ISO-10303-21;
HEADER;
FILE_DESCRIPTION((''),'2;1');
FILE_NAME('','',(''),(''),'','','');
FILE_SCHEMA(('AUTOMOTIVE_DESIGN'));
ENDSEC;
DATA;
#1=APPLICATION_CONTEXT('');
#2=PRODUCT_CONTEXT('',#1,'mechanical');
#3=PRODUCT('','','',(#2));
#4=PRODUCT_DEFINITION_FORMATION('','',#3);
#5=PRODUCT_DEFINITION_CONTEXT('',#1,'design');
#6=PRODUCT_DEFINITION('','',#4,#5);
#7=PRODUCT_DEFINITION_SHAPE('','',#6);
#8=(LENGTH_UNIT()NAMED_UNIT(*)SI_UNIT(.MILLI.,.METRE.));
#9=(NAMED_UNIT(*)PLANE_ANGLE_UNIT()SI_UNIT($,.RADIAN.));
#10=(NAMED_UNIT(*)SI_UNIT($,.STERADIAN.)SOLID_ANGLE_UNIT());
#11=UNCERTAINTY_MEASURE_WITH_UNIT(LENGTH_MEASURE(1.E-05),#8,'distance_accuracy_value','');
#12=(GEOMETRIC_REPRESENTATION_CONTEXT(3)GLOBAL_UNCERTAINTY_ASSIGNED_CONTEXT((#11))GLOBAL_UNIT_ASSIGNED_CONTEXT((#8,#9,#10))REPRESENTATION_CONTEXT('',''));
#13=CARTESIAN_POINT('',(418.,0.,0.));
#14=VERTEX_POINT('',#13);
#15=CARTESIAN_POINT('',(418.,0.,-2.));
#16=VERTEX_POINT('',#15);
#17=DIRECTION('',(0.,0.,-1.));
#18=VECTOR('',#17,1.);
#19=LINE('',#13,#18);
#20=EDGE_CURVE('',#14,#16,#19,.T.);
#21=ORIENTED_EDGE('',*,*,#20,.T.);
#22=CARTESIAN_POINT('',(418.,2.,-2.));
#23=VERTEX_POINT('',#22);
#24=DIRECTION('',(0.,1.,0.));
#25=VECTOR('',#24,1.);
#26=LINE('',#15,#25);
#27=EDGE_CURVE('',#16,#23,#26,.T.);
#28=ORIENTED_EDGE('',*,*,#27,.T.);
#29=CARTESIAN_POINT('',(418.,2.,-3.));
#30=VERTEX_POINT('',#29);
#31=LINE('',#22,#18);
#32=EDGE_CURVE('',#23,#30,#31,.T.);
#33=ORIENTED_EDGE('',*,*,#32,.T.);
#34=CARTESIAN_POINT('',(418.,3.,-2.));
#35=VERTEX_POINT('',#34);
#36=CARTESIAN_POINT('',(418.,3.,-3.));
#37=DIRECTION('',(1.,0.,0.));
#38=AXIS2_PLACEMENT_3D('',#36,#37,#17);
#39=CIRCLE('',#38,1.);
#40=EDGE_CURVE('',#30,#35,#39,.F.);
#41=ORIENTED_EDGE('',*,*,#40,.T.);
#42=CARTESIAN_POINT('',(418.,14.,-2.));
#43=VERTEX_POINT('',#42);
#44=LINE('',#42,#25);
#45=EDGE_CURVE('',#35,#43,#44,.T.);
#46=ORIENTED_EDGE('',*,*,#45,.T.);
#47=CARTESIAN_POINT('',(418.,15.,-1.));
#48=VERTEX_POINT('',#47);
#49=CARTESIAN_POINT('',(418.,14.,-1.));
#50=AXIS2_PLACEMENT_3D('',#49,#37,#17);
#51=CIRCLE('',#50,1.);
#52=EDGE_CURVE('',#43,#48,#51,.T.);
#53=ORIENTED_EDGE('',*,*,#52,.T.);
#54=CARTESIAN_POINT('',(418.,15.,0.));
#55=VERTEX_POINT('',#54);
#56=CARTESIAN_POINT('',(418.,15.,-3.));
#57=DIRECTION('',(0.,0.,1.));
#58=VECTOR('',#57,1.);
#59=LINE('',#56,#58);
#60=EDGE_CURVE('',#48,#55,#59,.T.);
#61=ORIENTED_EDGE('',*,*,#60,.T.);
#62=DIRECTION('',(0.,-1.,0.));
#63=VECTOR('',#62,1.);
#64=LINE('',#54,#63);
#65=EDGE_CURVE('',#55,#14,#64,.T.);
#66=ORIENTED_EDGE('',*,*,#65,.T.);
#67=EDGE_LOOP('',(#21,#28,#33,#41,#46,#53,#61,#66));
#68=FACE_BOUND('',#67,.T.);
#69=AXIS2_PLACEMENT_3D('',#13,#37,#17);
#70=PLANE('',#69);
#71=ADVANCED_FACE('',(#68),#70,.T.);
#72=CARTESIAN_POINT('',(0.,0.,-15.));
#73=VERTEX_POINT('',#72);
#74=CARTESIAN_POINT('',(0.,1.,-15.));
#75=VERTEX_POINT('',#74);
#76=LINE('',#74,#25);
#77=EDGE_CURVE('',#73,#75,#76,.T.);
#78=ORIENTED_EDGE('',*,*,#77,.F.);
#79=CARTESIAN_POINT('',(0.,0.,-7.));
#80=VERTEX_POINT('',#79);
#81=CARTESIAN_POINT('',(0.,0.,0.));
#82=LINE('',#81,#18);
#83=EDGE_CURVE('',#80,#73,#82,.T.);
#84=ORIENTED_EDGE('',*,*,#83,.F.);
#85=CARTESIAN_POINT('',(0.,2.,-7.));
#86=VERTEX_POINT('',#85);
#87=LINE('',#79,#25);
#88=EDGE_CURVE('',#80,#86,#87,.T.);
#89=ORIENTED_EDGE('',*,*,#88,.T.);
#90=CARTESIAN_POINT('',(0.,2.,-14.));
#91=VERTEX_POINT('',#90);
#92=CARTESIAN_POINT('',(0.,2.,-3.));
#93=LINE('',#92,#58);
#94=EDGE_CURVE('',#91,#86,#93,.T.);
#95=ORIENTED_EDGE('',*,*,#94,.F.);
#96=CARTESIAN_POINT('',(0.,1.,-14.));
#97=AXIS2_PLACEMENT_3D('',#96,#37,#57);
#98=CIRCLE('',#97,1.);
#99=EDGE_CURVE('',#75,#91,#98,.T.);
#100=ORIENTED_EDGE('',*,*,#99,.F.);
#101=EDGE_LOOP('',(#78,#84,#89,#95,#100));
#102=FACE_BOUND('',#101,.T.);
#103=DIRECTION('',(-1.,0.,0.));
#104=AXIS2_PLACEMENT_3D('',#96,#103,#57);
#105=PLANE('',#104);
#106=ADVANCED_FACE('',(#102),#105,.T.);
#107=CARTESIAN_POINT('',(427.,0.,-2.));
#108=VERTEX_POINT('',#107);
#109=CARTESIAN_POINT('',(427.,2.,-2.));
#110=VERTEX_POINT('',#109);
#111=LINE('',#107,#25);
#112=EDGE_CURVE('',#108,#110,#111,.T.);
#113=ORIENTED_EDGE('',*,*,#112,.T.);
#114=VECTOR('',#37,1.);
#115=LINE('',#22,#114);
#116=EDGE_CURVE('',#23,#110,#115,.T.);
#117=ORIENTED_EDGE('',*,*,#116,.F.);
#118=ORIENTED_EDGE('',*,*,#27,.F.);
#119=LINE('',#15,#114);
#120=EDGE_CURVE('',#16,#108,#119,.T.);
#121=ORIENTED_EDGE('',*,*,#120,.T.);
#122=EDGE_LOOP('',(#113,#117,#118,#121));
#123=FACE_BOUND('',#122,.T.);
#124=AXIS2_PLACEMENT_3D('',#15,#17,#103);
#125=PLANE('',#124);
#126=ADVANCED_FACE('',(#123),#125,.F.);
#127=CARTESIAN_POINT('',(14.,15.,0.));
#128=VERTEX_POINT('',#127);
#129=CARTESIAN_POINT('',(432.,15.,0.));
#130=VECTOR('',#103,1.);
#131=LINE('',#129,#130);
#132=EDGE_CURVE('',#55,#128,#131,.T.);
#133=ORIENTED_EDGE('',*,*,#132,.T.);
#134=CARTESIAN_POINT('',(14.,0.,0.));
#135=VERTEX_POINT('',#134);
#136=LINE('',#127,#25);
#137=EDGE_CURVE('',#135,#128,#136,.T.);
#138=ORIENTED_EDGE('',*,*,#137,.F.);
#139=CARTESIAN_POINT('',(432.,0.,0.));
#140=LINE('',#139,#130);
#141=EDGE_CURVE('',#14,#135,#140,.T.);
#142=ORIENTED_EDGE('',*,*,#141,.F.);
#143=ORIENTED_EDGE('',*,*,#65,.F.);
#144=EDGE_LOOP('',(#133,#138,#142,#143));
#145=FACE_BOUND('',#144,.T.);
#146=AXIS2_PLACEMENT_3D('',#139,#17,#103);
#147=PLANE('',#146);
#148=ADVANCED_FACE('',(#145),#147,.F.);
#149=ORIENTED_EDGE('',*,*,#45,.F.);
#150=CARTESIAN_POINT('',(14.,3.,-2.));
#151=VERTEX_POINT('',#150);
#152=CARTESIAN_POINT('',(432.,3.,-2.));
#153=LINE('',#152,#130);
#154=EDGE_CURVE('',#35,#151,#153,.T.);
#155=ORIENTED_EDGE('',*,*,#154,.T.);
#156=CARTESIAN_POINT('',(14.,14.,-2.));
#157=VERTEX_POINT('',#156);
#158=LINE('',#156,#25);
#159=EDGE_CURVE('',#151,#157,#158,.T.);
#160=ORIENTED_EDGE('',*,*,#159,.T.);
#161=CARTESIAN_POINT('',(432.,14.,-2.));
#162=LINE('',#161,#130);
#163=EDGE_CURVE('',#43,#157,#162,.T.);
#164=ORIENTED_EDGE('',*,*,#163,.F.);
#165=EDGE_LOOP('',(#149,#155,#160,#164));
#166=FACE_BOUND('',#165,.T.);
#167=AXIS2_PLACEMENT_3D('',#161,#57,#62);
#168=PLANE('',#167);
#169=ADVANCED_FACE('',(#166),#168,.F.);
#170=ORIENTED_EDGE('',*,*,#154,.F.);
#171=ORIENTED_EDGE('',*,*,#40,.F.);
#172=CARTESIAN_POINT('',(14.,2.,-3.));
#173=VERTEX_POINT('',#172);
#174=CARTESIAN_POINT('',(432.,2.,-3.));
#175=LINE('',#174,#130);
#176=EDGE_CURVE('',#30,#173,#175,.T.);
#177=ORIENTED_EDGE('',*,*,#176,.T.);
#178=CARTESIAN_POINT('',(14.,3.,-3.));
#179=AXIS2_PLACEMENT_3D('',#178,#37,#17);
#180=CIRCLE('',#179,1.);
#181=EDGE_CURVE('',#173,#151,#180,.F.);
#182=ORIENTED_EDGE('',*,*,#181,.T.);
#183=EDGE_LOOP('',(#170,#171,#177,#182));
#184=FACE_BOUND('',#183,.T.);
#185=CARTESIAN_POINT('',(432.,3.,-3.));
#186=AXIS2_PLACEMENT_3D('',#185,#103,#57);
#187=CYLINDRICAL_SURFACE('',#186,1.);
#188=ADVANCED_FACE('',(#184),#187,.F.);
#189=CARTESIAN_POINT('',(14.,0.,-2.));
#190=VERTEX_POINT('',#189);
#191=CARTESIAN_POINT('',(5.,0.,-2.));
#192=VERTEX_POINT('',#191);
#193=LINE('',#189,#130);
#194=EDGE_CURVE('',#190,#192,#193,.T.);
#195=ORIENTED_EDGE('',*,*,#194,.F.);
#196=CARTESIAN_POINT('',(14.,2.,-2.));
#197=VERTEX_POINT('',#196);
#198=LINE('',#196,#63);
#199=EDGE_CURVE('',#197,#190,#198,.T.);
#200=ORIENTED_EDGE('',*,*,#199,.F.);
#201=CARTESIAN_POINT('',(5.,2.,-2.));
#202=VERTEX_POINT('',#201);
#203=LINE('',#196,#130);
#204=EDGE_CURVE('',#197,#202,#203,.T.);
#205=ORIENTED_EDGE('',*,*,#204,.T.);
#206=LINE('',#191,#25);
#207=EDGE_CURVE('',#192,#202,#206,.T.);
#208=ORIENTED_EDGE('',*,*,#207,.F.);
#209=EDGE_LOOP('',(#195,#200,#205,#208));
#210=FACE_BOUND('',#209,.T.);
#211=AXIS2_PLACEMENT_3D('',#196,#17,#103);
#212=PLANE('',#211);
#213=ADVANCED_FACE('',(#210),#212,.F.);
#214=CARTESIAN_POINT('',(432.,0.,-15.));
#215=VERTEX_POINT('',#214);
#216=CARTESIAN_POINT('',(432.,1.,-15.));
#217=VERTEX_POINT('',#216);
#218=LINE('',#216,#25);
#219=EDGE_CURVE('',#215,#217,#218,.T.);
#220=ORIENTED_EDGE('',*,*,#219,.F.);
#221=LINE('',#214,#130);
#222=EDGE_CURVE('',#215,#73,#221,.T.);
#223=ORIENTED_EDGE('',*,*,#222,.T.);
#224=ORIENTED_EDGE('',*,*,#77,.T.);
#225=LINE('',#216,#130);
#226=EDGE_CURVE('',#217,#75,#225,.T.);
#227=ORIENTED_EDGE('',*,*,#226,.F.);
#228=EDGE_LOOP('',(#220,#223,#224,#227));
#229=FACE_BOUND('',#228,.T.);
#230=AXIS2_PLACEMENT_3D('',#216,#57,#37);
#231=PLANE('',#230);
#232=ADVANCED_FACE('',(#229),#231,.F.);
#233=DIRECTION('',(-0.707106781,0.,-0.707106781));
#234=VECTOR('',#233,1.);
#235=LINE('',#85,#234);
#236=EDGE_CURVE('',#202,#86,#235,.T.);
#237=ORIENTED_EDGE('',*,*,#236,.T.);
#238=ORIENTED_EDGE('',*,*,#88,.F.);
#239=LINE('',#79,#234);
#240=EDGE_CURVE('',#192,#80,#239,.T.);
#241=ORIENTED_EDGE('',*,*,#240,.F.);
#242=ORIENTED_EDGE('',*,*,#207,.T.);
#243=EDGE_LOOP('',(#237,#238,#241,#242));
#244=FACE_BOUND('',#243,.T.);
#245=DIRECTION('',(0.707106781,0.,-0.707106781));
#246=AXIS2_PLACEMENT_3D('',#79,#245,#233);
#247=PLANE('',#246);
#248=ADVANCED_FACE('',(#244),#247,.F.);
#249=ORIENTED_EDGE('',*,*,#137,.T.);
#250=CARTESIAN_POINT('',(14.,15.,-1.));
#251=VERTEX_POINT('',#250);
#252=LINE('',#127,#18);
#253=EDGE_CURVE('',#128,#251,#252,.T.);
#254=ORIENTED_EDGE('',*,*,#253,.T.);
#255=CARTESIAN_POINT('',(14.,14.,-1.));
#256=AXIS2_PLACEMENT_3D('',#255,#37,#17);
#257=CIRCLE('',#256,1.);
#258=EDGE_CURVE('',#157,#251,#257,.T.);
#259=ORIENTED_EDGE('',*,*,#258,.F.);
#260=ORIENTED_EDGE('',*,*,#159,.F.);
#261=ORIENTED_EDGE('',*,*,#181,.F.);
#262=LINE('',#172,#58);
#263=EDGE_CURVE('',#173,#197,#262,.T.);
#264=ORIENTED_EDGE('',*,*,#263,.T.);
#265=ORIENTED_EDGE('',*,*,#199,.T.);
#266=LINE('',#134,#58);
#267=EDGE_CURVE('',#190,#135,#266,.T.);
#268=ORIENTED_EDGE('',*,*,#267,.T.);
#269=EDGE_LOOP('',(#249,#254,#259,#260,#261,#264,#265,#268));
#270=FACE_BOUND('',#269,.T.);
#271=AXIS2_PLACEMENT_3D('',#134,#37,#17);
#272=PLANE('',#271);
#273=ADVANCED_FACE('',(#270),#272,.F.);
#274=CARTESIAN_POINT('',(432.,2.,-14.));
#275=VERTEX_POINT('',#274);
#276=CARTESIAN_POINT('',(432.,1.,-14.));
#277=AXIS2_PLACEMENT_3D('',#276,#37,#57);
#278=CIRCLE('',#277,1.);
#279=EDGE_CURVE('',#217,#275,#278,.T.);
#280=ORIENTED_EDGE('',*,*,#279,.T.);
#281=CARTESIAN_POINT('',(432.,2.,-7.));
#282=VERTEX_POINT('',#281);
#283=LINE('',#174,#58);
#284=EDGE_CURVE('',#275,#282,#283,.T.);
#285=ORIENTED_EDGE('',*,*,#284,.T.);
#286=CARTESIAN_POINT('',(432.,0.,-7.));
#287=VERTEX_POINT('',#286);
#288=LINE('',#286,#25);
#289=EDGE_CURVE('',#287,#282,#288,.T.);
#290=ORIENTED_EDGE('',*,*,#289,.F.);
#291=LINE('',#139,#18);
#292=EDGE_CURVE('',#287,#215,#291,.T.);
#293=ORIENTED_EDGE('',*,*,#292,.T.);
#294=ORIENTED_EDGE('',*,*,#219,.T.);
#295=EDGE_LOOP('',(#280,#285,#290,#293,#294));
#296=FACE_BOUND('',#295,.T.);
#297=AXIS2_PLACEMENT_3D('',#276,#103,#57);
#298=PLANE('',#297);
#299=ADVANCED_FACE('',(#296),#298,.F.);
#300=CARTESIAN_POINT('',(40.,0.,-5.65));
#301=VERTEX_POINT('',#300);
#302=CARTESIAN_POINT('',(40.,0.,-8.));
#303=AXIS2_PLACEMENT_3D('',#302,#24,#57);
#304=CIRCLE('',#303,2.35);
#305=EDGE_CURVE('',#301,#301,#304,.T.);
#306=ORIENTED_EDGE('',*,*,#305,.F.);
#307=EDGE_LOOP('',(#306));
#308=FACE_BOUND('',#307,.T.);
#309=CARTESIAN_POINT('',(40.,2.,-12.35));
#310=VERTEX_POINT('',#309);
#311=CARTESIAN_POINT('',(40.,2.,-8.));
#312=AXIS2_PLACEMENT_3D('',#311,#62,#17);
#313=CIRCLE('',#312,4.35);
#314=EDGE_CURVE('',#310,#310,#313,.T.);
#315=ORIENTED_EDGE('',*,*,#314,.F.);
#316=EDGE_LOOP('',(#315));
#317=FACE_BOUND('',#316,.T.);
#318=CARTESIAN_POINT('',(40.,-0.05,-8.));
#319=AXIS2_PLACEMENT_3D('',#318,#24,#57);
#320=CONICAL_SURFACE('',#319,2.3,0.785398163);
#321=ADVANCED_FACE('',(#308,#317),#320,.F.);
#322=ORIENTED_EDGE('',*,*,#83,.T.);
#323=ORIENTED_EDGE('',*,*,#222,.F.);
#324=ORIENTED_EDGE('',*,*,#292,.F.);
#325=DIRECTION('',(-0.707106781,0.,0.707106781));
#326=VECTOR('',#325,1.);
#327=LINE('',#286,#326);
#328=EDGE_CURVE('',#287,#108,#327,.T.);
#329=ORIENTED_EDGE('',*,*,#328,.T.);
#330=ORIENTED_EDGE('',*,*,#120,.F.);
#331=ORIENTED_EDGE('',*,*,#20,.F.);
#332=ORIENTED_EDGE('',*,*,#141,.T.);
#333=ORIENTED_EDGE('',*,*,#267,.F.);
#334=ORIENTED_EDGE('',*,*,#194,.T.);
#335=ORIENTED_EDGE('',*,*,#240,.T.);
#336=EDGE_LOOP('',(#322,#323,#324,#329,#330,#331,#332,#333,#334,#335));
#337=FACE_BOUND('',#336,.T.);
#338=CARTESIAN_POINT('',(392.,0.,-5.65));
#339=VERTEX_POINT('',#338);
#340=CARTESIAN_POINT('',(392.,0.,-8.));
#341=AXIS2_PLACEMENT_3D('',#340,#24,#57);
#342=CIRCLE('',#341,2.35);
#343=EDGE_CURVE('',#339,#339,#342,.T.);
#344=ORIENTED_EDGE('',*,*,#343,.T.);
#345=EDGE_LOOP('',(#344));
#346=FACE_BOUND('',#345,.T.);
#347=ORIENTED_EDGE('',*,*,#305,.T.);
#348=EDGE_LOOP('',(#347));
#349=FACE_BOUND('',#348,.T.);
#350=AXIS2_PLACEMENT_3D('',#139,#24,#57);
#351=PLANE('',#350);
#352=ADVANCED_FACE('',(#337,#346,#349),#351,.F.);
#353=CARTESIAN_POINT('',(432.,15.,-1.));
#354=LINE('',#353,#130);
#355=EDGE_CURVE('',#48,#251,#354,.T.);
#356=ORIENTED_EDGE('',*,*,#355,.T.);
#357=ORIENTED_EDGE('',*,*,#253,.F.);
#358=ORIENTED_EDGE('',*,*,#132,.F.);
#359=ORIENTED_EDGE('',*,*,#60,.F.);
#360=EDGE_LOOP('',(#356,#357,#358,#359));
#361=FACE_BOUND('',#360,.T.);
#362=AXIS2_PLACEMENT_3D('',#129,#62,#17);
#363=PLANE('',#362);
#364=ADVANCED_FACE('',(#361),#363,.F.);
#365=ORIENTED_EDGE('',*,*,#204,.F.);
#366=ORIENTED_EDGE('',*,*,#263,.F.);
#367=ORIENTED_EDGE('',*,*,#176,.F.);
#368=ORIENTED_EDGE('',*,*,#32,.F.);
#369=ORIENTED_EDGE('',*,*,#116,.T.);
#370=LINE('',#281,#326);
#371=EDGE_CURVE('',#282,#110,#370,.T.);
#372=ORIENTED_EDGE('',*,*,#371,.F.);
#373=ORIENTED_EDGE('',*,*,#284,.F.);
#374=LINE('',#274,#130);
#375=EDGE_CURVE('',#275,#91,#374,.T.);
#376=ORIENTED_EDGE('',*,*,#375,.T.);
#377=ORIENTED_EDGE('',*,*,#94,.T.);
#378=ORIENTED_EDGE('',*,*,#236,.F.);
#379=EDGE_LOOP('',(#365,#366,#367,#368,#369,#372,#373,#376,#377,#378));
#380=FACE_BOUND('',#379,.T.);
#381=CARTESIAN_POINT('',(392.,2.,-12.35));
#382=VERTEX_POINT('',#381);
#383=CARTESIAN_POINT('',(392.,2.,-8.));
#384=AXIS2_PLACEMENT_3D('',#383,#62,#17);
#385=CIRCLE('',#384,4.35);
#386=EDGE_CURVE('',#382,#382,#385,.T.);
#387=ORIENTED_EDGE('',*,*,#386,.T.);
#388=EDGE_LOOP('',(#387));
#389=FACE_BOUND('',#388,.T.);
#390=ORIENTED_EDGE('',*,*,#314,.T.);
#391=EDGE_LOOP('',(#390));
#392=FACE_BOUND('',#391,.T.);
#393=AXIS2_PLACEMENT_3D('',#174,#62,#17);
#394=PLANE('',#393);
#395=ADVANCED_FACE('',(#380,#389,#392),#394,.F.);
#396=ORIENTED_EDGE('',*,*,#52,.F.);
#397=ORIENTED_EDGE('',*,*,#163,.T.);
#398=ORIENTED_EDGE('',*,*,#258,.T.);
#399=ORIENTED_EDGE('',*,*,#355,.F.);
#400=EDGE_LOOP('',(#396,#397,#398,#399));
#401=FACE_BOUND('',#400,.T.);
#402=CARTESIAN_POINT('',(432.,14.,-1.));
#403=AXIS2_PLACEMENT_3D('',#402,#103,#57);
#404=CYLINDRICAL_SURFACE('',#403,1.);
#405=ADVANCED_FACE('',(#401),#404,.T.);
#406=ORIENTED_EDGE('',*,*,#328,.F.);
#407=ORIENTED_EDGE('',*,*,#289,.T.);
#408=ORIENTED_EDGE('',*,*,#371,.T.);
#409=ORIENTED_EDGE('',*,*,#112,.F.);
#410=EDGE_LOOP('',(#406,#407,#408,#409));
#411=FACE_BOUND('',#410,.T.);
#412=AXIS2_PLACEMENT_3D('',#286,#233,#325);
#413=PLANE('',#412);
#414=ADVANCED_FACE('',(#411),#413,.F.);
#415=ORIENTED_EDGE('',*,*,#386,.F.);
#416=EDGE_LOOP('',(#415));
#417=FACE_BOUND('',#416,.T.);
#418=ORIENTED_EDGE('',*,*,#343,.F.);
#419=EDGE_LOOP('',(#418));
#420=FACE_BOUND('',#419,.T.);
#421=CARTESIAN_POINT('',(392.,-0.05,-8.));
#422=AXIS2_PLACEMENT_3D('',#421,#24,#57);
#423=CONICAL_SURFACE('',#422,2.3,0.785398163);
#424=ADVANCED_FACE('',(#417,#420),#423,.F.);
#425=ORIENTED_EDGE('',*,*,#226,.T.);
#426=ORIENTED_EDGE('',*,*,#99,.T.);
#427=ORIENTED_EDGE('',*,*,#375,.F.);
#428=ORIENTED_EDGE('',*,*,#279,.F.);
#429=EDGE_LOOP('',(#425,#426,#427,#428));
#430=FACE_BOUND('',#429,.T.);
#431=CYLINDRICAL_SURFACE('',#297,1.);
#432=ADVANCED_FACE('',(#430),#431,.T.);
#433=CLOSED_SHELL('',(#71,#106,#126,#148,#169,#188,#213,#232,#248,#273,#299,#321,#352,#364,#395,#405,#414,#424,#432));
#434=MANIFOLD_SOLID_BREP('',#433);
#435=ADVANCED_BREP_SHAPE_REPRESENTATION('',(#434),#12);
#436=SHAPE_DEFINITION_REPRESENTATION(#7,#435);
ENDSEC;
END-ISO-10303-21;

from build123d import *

# Parameters (mm, degrees)
EXTRUDE_1_DEPTH     = 432
CUT_EXTRUDE_5_DEPTH = 14
CUT_EXTRUDE_6_DEPTH = 14
CUT_EXTRUDE_7_DEPTH = 433.455778086
SKETCH_10_R         = 2.3
CUT_EXTRUDE_8_DEPTH = 433.455778086
CHAMFER_1_SIZE      = 2.05


with BuildPart() as part:
    # Эскиз1 → Бобышка-Вытянуть1 (new body)
    with BuildSketch(Plane(origin=(0, 0, 0), x_dir=(0, 0, -1), z_dir=(1, 0, 0))):
        with BuildLine():
            Line((0, 0), (0, 15))
            Line((0, 15), (1, 15))
            ThreePointArc((1, 15), (1.707106781, 14.707106781), (2, 14))
            Line((2, 14), (2, 3))
            ThreePointArc((2, 3), (2.292893219, 2.292893219), (3, 2))
            Line((3, 2), (14, 2))
            ThreePointArc((14, 2), (14.707106781, 1.707106781), (15, 1))
            Line((15, 1), (15, 0))
            Line((15, 0), (0, 0))
        make_face()
    extrude(amount=EXTRUDE_1_DEPTH)

    # Эскиз6 → Вырез-Вытянуть5 (cut)
    with BuildSketch(Plane(origin=(432, 0, 0), x_dir=(0, 0, -1), z_dir=(1, 0, 0))):
        Polygon((0, 15), (2, 15), (3, 15), (3, 2), (2, 2), (2, 0), (0, 0), align=None)
    extrude(amount=-CUT_EXTRUDE_5_DEPTH, mode=Mode.SUBTRACT)

    # Эскиз7 → Вырез-Вытянуть6 (cut)
    with BuildSketch(Plane.ZY):
        Polygon((0, 15), (-2, 15), (-3, 15), (-3, 2), (-2, 2), (-2, 0), (0, 0), align=None)
    extrude(amount=-CUT_EXTRUDE_6_DEPTH, mode=Mode.SUBTRACT)

    # Эскиз9 → Вырез-Вытянуть7 (cut, through all)
    with BuildSketch(Plane(origin=(0, 2, 0), x_dir=(1, 0, 0), z_dir=(0, 1, 0))):
        Polygon((0, 2), (0, 7), (5, 2), align=None)
        Polygon((432, 2), (432, 7), (427, 2), align=None)
    extrude(amount=-CUT_EXTRUDE_7_DEPTH, mode=Mode.SUBTRACT)

    # Эскиз10 → Вырез-Вытянуть8 (cut, through all)
    with BuildSketch(Plane(origin=(0, 2, 0), x_dir=(1, 0, 0), z_dir=(0, 1, 0))):
        with Locations(Location((40, 8, 0), (0, 0, 270))):
            Circle(SKETCH_10_R)
        with Locations(Location((392, 8, 0), (0, 0, 270))):
            Circle(SKETCH_10_R)
    extrude(amount=-CUT_EXTRUDE_8_DEPTH, mode=Mode.SUBTRACT)

    # Фаска1
    # the kernel refuses this chamfer: 2.05 mm, written as the material it takes off along each edge
    with BuildSketch(Plane(origin=(40, 2, -8), x_dir=(0, 0, 1), z_dir=(-1, 0, 0))) as chamfer_1_piece_1:
        Polygon((2.3 + CHAMFER_1_SIZE, 0), (2.3, -CHAMFER_1_SIZE), (2.3, 0), align=None)
    revolve(axis=Axis((40, 2, -8), (0, 1, 0)), mode=Mode.SUBTRACT)
    with BuildSketch(Plane(origin=(392, 2, -8), x_dir=(0, 0, 1), z_dir=(-1, 0, 0))) as chamfer_1_piece_2:
        Polygon((2.3 + CHAMFER_1_SIZE, 0), (2.3, -CHAMFER_1_SIZE), (2.3, 0), align=None)
    revolve(axis=Axis((392, 2, -8), (0, 1, 0)), mode=Mode.SUBTRACT)


solid = part.part
